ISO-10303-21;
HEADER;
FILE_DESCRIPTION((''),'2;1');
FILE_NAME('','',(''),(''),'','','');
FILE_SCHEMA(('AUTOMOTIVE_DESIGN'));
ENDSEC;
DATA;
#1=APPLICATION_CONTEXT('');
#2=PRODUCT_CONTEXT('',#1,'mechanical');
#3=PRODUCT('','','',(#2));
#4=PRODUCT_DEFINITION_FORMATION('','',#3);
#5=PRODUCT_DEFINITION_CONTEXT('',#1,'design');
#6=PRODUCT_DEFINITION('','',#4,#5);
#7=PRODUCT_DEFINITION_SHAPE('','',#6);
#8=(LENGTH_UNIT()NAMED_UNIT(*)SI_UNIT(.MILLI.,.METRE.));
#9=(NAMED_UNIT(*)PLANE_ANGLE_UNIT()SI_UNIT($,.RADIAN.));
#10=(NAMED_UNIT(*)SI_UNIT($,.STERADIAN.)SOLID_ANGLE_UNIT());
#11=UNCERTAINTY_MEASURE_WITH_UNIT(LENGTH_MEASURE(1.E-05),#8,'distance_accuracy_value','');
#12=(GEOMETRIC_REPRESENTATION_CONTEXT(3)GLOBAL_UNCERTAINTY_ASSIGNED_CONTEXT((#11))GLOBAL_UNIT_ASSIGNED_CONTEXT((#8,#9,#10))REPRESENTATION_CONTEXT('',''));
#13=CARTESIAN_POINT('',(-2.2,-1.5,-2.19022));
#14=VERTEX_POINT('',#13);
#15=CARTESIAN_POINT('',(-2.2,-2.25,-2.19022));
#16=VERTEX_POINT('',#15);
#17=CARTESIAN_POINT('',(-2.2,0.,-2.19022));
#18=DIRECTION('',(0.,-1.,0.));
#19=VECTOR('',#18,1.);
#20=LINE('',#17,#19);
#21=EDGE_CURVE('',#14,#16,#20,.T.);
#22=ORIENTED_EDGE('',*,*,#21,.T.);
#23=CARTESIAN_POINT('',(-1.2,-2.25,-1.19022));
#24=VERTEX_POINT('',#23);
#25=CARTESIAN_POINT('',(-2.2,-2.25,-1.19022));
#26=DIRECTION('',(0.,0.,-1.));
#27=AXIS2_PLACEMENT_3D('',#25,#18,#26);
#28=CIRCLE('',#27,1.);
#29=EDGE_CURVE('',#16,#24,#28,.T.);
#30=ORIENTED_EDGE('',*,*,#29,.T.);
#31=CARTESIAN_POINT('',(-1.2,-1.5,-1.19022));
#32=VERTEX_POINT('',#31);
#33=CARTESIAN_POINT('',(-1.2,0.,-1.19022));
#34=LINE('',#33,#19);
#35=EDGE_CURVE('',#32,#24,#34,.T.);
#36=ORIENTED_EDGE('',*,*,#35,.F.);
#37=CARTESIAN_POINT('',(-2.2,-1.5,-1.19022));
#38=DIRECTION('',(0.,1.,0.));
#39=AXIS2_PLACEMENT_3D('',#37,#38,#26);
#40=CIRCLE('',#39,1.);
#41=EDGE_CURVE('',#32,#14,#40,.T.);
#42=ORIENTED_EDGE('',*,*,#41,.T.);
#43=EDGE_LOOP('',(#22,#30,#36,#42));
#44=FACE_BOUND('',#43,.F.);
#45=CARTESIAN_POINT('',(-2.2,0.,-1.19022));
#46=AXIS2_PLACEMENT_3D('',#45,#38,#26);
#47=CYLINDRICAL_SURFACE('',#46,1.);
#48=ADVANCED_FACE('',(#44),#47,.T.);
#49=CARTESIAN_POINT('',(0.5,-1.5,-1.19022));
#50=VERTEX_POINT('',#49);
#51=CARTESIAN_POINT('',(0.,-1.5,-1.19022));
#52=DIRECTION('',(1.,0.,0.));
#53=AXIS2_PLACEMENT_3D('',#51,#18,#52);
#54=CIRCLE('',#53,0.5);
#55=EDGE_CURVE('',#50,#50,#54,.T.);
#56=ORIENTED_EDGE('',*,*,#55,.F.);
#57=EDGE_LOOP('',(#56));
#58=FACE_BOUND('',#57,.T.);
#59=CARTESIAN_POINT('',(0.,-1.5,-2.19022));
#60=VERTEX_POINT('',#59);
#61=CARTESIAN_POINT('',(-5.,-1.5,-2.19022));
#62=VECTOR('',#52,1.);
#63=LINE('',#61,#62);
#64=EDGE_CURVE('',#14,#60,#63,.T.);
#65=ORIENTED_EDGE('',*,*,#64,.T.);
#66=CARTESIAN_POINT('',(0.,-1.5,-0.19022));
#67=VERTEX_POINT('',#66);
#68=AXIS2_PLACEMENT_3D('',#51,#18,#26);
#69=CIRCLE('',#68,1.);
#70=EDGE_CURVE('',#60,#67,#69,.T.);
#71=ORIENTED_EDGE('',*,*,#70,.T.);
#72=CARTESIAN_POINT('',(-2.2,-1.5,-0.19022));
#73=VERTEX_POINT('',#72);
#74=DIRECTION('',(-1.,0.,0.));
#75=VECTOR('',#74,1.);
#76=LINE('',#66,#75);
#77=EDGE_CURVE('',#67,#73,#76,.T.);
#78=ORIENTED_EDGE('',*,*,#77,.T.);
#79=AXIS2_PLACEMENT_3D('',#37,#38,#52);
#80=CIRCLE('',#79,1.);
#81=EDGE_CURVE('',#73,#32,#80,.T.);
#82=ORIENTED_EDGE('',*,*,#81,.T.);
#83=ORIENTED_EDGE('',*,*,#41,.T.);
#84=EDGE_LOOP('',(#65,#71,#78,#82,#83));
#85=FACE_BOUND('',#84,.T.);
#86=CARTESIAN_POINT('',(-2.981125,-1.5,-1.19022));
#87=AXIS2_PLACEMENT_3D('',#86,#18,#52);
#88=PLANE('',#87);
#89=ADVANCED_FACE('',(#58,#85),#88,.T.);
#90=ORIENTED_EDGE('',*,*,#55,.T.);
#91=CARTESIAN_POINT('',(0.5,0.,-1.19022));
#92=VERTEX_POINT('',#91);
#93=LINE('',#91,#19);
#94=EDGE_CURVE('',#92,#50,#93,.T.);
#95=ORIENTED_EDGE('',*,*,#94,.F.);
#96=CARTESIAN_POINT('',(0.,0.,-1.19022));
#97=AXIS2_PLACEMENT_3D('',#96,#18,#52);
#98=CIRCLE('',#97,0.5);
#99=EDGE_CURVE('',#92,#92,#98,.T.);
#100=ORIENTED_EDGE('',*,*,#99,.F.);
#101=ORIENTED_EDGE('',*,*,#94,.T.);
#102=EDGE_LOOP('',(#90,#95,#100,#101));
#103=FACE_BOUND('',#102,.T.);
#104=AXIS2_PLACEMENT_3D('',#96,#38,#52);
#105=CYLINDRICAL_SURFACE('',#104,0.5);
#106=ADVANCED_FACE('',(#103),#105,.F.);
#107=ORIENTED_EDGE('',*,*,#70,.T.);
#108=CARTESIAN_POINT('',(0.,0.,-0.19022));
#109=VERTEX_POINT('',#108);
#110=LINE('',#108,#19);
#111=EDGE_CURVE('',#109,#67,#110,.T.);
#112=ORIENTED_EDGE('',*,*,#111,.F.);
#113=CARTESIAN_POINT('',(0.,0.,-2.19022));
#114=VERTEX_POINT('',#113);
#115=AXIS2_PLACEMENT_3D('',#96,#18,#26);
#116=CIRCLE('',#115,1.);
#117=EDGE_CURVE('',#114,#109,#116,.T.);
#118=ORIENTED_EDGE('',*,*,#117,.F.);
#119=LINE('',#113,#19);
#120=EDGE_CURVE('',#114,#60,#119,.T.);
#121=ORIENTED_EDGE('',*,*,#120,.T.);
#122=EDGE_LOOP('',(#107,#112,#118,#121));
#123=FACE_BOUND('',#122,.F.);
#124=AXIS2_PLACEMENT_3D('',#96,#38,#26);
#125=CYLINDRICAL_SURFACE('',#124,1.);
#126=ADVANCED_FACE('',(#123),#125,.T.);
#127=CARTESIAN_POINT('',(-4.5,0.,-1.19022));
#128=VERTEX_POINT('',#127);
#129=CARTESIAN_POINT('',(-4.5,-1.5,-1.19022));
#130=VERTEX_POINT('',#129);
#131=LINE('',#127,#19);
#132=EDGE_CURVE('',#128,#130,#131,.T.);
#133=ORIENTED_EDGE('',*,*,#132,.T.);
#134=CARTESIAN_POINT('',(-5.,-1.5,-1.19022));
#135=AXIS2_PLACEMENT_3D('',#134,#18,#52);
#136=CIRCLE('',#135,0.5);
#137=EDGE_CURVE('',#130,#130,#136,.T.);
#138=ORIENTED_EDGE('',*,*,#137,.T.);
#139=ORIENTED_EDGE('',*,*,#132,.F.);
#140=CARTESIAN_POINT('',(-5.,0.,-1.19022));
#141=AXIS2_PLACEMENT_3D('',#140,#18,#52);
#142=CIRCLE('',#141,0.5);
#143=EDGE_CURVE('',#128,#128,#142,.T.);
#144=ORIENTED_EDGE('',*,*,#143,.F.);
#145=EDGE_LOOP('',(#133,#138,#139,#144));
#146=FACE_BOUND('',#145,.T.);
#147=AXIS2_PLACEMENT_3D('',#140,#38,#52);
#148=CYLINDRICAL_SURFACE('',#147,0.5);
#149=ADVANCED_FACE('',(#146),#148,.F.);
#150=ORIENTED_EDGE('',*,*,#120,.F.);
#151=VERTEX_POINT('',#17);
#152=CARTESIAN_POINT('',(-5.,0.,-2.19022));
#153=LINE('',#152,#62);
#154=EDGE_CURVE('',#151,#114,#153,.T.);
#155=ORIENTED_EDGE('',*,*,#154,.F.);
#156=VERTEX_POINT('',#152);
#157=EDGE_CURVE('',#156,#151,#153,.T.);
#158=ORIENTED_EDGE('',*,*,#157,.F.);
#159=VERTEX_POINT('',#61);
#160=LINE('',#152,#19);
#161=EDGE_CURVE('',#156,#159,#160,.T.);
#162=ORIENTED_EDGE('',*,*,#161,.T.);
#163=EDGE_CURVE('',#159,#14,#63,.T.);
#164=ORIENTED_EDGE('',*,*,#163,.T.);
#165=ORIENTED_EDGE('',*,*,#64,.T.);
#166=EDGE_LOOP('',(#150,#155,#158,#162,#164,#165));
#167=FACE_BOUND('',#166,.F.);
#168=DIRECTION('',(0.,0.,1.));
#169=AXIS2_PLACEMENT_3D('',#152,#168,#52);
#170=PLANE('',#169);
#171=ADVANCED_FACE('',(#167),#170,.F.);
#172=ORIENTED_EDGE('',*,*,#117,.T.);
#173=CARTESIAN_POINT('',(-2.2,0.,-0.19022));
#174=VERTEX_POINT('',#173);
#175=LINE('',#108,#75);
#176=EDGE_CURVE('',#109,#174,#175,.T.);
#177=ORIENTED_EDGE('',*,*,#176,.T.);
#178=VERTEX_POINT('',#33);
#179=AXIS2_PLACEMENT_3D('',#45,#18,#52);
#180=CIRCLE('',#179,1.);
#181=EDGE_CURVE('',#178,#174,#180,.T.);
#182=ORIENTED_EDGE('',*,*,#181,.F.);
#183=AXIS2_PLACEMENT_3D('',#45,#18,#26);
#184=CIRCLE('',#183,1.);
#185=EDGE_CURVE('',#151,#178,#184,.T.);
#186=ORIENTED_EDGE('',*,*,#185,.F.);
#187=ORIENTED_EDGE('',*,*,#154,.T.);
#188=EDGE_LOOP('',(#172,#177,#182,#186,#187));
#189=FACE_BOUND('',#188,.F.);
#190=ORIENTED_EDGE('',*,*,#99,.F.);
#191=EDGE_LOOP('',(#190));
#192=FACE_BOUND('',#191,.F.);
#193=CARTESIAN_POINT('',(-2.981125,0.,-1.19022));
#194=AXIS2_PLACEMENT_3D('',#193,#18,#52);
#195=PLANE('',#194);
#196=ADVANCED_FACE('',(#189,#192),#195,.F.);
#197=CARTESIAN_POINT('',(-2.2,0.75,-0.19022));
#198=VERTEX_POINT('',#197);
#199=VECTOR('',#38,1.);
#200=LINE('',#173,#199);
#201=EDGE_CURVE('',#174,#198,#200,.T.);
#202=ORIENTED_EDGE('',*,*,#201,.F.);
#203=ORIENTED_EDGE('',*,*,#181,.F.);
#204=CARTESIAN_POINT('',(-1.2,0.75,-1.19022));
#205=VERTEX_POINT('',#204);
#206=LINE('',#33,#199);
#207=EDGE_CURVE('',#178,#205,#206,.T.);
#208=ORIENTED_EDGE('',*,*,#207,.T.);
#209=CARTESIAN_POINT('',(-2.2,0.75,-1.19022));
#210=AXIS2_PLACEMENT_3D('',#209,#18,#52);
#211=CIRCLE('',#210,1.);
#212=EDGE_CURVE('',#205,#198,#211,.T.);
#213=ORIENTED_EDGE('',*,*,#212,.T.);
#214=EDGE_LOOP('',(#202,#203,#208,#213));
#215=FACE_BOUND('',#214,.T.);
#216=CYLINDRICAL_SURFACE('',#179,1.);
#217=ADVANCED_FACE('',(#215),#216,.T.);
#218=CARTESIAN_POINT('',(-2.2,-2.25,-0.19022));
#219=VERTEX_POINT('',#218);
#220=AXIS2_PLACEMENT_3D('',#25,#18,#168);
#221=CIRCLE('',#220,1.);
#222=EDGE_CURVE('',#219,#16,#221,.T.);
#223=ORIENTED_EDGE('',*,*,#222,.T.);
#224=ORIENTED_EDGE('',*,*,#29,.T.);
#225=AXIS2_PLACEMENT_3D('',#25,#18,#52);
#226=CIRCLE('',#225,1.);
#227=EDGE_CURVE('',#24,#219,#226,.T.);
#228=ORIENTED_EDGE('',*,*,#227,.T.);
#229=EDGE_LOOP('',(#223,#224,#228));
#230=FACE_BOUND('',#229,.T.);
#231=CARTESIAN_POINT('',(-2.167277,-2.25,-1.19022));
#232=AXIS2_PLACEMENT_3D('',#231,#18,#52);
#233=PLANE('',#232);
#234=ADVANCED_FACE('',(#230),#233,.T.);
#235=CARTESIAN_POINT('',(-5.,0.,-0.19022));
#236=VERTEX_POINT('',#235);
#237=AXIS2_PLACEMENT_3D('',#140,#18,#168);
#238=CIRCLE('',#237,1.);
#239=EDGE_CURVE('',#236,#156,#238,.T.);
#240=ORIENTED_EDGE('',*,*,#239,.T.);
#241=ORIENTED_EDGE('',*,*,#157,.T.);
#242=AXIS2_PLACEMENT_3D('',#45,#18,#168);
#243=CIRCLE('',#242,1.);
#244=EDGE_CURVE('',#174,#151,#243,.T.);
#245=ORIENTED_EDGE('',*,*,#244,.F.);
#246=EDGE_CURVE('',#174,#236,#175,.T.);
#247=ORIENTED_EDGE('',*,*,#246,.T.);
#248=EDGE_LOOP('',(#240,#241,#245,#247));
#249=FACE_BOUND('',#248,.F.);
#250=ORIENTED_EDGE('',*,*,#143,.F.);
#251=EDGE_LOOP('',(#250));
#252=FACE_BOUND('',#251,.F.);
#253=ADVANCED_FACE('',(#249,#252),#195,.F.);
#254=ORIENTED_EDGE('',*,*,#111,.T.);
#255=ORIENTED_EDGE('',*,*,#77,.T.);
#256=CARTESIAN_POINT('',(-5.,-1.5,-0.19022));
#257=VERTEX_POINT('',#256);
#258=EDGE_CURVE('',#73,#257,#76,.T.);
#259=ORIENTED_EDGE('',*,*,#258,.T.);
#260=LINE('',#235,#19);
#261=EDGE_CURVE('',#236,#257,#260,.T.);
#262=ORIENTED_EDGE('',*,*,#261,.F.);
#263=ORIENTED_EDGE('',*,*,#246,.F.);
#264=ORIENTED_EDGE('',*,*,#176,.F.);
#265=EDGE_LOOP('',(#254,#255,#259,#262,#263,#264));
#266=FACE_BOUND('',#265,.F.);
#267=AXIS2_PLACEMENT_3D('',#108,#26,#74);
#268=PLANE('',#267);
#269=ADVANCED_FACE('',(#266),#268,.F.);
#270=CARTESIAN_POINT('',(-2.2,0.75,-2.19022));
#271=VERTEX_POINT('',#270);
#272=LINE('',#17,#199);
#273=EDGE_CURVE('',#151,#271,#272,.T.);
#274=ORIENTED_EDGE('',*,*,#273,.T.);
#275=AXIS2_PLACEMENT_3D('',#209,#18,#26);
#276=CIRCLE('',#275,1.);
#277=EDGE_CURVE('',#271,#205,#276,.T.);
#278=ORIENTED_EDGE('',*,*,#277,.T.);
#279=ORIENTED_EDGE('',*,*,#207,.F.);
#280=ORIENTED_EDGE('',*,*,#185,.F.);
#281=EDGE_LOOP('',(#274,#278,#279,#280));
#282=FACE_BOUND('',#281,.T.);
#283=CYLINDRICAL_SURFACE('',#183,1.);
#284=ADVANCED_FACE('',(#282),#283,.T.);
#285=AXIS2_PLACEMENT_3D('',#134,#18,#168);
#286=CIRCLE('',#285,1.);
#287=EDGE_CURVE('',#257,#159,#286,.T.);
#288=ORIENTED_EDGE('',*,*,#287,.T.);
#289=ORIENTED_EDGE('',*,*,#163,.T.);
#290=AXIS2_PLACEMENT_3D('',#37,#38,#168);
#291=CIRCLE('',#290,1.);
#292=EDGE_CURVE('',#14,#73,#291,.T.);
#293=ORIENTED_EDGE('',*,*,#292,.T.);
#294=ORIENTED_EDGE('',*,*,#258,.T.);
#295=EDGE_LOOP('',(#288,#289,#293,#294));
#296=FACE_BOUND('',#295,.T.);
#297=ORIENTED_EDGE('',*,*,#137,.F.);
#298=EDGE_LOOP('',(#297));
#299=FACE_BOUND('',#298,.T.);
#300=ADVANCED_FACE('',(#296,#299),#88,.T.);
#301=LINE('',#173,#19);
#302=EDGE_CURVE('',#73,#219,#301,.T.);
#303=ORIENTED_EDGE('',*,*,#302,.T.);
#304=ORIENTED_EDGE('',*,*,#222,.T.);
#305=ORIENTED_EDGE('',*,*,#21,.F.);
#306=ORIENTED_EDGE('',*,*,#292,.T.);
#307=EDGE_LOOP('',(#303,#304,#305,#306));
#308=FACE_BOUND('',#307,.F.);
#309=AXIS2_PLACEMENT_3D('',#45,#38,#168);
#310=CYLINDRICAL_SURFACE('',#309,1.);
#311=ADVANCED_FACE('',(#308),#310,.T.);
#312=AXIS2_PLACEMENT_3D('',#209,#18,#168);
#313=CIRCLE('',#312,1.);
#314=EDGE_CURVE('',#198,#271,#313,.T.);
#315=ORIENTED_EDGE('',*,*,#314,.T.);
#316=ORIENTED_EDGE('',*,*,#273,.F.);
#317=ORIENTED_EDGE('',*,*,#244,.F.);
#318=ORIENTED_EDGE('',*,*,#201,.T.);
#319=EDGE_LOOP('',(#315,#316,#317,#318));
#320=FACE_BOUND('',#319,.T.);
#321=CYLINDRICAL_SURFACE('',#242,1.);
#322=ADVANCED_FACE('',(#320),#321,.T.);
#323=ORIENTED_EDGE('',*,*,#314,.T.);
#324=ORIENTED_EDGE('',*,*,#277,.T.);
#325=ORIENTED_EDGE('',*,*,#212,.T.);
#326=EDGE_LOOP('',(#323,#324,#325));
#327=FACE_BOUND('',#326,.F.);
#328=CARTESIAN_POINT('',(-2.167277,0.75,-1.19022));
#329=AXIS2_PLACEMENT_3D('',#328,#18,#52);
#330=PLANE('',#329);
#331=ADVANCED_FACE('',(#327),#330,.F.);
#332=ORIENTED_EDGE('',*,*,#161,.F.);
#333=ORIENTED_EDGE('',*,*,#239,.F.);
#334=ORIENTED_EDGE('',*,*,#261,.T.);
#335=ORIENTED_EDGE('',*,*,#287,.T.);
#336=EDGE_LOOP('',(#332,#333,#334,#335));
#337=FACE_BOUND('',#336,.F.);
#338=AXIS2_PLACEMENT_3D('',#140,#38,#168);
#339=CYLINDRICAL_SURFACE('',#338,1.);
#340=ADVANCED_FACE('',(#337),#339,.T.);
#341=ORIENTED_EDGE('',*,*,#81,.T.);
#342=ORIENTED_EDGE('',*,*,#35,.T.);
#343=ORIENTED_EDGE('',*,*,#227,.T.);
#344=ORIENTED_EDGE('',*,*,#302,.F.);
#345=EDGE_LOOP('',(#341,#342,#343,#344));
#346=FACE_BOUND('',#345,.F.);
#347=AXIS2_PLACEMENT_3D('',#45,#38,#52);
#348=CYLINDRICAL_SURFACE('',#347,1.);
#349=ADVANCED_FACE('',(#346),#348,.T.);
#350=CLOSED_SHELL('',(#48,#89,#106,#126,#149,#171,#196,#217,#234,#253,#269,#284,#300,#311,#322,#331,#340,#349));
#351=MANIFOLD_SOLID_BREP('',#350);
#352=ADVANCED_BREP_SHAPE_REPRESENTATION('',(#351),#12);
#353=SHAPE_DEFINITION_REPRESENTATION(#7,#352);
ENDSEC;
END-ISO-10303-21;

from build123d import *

# Parameters (mm, degrees)
F0_R          = 0.5
F1_DEPTH      = 1.5
F2_DEPTH      = 0.75
F2_DEPTH_BACK = 2.25


# Not quite as in the source:
# - a feature names something its author has since deleted; it is built from what else it names


with BuildPart() as f1:
    # F0 (on Front) → F1 (new body)
    with BuildSketch(Plane.XZ):
        with BuildLine():
            ThreePointArc((-2.2, -2.1902196236), (-3.2, -1.1902196236), (-2.2, -0.1902196236))
            Line((-2.2, -0.1902196236), (-2.8, -0.1902196236))
            ThreePointArc((-2.8, -0.1902196236), (-3.8, -1.1902196236), (-2.8, -2.1902196236))
            Line((-2.8, -2.1902196236), (-2.2, -2.1902196236))
        make_face()
        with BuildLine():
            Line((0, -0.1902196236), (-2.2, -0.1902196236))
            ThreePointArc((-2.2, -0.1902196236), (-1.4928932188, -0.4831128424), (-1.2, -1.1902196236))
            ThreePointArc((-1.2, -1.1902196236), (-1.4928932188, -1.8973264048), (-2.2, -2.1902196236))
            Line((-2.2, -2.1902196236), (0, -2.1902196236))
            ThreePointArc((0, -2.1902196236), (1, -1.1902196236), (0, -0.1902196236))
        make_face()
        with Locations((0, -1.1902196236)):
            Circle(F0_R, mode=Mode.SUBTRACT)
        with BuildLine():
            ThreePointArc((-2.8, -2.1902196236), (-3.8, -1.1902196236), (-2.8, -0.1902196236))
            Line((-2.8, -0.1902196236), (-5, -0.1902196236))
            ThreePointArc((-5, -0.1902196236), (-6, -1.1902196236), (-5, -2.1902196236))
            Line((-5, -2.1902196236), (-2.8, -2.1902196236))
        make_face()
        with Locations((-5, -1.1902196236)):
            Circle(F0_R, mode=Mode.SUBTRACT)
        with BuildLine():
            ThreePointArc((-1.2, -1.1902196236), (-1.4928932188, -0.4831128424), (-2.2, -0.1902196236))
            ThreePointArc((-2.2, -0.1902196236), (-3.2, -1.1902196236), (-2.2, -2.1902196236))
            ThreePointArc((-2.2, -2.1902196236), (-1.4928932188, -1.8973264048), (-1.2, -1.1902196236))
        make_face()
    extrude(amount=F1_DEPTH)

    # F0 (on Front) → F2 (join, two sides)
    with BuildSketch(Plane.XZ) as f2_sk:
        with BuildLine():
            ThreePointArc((-1.2, -1.1902196236), (-1.4928932188, -0.4831128424), (-2.2, -0.1902196236))
            ThreePointArc((-2.2, -0.1902196236), (-3.2, -1.1902196236), (-2.2, -2.1902196236))
            ThreePointArc((-2.2, -2.1902196236), (-1.4928932188, -1.8973264048), (-1.2, -1.1902196236))
        make_face()
    extrude(amount=-F2_DEPTH)
    extrude(f2_sk.sketch, amount=F2_DEPTH_BACK)


solid = f1.part
